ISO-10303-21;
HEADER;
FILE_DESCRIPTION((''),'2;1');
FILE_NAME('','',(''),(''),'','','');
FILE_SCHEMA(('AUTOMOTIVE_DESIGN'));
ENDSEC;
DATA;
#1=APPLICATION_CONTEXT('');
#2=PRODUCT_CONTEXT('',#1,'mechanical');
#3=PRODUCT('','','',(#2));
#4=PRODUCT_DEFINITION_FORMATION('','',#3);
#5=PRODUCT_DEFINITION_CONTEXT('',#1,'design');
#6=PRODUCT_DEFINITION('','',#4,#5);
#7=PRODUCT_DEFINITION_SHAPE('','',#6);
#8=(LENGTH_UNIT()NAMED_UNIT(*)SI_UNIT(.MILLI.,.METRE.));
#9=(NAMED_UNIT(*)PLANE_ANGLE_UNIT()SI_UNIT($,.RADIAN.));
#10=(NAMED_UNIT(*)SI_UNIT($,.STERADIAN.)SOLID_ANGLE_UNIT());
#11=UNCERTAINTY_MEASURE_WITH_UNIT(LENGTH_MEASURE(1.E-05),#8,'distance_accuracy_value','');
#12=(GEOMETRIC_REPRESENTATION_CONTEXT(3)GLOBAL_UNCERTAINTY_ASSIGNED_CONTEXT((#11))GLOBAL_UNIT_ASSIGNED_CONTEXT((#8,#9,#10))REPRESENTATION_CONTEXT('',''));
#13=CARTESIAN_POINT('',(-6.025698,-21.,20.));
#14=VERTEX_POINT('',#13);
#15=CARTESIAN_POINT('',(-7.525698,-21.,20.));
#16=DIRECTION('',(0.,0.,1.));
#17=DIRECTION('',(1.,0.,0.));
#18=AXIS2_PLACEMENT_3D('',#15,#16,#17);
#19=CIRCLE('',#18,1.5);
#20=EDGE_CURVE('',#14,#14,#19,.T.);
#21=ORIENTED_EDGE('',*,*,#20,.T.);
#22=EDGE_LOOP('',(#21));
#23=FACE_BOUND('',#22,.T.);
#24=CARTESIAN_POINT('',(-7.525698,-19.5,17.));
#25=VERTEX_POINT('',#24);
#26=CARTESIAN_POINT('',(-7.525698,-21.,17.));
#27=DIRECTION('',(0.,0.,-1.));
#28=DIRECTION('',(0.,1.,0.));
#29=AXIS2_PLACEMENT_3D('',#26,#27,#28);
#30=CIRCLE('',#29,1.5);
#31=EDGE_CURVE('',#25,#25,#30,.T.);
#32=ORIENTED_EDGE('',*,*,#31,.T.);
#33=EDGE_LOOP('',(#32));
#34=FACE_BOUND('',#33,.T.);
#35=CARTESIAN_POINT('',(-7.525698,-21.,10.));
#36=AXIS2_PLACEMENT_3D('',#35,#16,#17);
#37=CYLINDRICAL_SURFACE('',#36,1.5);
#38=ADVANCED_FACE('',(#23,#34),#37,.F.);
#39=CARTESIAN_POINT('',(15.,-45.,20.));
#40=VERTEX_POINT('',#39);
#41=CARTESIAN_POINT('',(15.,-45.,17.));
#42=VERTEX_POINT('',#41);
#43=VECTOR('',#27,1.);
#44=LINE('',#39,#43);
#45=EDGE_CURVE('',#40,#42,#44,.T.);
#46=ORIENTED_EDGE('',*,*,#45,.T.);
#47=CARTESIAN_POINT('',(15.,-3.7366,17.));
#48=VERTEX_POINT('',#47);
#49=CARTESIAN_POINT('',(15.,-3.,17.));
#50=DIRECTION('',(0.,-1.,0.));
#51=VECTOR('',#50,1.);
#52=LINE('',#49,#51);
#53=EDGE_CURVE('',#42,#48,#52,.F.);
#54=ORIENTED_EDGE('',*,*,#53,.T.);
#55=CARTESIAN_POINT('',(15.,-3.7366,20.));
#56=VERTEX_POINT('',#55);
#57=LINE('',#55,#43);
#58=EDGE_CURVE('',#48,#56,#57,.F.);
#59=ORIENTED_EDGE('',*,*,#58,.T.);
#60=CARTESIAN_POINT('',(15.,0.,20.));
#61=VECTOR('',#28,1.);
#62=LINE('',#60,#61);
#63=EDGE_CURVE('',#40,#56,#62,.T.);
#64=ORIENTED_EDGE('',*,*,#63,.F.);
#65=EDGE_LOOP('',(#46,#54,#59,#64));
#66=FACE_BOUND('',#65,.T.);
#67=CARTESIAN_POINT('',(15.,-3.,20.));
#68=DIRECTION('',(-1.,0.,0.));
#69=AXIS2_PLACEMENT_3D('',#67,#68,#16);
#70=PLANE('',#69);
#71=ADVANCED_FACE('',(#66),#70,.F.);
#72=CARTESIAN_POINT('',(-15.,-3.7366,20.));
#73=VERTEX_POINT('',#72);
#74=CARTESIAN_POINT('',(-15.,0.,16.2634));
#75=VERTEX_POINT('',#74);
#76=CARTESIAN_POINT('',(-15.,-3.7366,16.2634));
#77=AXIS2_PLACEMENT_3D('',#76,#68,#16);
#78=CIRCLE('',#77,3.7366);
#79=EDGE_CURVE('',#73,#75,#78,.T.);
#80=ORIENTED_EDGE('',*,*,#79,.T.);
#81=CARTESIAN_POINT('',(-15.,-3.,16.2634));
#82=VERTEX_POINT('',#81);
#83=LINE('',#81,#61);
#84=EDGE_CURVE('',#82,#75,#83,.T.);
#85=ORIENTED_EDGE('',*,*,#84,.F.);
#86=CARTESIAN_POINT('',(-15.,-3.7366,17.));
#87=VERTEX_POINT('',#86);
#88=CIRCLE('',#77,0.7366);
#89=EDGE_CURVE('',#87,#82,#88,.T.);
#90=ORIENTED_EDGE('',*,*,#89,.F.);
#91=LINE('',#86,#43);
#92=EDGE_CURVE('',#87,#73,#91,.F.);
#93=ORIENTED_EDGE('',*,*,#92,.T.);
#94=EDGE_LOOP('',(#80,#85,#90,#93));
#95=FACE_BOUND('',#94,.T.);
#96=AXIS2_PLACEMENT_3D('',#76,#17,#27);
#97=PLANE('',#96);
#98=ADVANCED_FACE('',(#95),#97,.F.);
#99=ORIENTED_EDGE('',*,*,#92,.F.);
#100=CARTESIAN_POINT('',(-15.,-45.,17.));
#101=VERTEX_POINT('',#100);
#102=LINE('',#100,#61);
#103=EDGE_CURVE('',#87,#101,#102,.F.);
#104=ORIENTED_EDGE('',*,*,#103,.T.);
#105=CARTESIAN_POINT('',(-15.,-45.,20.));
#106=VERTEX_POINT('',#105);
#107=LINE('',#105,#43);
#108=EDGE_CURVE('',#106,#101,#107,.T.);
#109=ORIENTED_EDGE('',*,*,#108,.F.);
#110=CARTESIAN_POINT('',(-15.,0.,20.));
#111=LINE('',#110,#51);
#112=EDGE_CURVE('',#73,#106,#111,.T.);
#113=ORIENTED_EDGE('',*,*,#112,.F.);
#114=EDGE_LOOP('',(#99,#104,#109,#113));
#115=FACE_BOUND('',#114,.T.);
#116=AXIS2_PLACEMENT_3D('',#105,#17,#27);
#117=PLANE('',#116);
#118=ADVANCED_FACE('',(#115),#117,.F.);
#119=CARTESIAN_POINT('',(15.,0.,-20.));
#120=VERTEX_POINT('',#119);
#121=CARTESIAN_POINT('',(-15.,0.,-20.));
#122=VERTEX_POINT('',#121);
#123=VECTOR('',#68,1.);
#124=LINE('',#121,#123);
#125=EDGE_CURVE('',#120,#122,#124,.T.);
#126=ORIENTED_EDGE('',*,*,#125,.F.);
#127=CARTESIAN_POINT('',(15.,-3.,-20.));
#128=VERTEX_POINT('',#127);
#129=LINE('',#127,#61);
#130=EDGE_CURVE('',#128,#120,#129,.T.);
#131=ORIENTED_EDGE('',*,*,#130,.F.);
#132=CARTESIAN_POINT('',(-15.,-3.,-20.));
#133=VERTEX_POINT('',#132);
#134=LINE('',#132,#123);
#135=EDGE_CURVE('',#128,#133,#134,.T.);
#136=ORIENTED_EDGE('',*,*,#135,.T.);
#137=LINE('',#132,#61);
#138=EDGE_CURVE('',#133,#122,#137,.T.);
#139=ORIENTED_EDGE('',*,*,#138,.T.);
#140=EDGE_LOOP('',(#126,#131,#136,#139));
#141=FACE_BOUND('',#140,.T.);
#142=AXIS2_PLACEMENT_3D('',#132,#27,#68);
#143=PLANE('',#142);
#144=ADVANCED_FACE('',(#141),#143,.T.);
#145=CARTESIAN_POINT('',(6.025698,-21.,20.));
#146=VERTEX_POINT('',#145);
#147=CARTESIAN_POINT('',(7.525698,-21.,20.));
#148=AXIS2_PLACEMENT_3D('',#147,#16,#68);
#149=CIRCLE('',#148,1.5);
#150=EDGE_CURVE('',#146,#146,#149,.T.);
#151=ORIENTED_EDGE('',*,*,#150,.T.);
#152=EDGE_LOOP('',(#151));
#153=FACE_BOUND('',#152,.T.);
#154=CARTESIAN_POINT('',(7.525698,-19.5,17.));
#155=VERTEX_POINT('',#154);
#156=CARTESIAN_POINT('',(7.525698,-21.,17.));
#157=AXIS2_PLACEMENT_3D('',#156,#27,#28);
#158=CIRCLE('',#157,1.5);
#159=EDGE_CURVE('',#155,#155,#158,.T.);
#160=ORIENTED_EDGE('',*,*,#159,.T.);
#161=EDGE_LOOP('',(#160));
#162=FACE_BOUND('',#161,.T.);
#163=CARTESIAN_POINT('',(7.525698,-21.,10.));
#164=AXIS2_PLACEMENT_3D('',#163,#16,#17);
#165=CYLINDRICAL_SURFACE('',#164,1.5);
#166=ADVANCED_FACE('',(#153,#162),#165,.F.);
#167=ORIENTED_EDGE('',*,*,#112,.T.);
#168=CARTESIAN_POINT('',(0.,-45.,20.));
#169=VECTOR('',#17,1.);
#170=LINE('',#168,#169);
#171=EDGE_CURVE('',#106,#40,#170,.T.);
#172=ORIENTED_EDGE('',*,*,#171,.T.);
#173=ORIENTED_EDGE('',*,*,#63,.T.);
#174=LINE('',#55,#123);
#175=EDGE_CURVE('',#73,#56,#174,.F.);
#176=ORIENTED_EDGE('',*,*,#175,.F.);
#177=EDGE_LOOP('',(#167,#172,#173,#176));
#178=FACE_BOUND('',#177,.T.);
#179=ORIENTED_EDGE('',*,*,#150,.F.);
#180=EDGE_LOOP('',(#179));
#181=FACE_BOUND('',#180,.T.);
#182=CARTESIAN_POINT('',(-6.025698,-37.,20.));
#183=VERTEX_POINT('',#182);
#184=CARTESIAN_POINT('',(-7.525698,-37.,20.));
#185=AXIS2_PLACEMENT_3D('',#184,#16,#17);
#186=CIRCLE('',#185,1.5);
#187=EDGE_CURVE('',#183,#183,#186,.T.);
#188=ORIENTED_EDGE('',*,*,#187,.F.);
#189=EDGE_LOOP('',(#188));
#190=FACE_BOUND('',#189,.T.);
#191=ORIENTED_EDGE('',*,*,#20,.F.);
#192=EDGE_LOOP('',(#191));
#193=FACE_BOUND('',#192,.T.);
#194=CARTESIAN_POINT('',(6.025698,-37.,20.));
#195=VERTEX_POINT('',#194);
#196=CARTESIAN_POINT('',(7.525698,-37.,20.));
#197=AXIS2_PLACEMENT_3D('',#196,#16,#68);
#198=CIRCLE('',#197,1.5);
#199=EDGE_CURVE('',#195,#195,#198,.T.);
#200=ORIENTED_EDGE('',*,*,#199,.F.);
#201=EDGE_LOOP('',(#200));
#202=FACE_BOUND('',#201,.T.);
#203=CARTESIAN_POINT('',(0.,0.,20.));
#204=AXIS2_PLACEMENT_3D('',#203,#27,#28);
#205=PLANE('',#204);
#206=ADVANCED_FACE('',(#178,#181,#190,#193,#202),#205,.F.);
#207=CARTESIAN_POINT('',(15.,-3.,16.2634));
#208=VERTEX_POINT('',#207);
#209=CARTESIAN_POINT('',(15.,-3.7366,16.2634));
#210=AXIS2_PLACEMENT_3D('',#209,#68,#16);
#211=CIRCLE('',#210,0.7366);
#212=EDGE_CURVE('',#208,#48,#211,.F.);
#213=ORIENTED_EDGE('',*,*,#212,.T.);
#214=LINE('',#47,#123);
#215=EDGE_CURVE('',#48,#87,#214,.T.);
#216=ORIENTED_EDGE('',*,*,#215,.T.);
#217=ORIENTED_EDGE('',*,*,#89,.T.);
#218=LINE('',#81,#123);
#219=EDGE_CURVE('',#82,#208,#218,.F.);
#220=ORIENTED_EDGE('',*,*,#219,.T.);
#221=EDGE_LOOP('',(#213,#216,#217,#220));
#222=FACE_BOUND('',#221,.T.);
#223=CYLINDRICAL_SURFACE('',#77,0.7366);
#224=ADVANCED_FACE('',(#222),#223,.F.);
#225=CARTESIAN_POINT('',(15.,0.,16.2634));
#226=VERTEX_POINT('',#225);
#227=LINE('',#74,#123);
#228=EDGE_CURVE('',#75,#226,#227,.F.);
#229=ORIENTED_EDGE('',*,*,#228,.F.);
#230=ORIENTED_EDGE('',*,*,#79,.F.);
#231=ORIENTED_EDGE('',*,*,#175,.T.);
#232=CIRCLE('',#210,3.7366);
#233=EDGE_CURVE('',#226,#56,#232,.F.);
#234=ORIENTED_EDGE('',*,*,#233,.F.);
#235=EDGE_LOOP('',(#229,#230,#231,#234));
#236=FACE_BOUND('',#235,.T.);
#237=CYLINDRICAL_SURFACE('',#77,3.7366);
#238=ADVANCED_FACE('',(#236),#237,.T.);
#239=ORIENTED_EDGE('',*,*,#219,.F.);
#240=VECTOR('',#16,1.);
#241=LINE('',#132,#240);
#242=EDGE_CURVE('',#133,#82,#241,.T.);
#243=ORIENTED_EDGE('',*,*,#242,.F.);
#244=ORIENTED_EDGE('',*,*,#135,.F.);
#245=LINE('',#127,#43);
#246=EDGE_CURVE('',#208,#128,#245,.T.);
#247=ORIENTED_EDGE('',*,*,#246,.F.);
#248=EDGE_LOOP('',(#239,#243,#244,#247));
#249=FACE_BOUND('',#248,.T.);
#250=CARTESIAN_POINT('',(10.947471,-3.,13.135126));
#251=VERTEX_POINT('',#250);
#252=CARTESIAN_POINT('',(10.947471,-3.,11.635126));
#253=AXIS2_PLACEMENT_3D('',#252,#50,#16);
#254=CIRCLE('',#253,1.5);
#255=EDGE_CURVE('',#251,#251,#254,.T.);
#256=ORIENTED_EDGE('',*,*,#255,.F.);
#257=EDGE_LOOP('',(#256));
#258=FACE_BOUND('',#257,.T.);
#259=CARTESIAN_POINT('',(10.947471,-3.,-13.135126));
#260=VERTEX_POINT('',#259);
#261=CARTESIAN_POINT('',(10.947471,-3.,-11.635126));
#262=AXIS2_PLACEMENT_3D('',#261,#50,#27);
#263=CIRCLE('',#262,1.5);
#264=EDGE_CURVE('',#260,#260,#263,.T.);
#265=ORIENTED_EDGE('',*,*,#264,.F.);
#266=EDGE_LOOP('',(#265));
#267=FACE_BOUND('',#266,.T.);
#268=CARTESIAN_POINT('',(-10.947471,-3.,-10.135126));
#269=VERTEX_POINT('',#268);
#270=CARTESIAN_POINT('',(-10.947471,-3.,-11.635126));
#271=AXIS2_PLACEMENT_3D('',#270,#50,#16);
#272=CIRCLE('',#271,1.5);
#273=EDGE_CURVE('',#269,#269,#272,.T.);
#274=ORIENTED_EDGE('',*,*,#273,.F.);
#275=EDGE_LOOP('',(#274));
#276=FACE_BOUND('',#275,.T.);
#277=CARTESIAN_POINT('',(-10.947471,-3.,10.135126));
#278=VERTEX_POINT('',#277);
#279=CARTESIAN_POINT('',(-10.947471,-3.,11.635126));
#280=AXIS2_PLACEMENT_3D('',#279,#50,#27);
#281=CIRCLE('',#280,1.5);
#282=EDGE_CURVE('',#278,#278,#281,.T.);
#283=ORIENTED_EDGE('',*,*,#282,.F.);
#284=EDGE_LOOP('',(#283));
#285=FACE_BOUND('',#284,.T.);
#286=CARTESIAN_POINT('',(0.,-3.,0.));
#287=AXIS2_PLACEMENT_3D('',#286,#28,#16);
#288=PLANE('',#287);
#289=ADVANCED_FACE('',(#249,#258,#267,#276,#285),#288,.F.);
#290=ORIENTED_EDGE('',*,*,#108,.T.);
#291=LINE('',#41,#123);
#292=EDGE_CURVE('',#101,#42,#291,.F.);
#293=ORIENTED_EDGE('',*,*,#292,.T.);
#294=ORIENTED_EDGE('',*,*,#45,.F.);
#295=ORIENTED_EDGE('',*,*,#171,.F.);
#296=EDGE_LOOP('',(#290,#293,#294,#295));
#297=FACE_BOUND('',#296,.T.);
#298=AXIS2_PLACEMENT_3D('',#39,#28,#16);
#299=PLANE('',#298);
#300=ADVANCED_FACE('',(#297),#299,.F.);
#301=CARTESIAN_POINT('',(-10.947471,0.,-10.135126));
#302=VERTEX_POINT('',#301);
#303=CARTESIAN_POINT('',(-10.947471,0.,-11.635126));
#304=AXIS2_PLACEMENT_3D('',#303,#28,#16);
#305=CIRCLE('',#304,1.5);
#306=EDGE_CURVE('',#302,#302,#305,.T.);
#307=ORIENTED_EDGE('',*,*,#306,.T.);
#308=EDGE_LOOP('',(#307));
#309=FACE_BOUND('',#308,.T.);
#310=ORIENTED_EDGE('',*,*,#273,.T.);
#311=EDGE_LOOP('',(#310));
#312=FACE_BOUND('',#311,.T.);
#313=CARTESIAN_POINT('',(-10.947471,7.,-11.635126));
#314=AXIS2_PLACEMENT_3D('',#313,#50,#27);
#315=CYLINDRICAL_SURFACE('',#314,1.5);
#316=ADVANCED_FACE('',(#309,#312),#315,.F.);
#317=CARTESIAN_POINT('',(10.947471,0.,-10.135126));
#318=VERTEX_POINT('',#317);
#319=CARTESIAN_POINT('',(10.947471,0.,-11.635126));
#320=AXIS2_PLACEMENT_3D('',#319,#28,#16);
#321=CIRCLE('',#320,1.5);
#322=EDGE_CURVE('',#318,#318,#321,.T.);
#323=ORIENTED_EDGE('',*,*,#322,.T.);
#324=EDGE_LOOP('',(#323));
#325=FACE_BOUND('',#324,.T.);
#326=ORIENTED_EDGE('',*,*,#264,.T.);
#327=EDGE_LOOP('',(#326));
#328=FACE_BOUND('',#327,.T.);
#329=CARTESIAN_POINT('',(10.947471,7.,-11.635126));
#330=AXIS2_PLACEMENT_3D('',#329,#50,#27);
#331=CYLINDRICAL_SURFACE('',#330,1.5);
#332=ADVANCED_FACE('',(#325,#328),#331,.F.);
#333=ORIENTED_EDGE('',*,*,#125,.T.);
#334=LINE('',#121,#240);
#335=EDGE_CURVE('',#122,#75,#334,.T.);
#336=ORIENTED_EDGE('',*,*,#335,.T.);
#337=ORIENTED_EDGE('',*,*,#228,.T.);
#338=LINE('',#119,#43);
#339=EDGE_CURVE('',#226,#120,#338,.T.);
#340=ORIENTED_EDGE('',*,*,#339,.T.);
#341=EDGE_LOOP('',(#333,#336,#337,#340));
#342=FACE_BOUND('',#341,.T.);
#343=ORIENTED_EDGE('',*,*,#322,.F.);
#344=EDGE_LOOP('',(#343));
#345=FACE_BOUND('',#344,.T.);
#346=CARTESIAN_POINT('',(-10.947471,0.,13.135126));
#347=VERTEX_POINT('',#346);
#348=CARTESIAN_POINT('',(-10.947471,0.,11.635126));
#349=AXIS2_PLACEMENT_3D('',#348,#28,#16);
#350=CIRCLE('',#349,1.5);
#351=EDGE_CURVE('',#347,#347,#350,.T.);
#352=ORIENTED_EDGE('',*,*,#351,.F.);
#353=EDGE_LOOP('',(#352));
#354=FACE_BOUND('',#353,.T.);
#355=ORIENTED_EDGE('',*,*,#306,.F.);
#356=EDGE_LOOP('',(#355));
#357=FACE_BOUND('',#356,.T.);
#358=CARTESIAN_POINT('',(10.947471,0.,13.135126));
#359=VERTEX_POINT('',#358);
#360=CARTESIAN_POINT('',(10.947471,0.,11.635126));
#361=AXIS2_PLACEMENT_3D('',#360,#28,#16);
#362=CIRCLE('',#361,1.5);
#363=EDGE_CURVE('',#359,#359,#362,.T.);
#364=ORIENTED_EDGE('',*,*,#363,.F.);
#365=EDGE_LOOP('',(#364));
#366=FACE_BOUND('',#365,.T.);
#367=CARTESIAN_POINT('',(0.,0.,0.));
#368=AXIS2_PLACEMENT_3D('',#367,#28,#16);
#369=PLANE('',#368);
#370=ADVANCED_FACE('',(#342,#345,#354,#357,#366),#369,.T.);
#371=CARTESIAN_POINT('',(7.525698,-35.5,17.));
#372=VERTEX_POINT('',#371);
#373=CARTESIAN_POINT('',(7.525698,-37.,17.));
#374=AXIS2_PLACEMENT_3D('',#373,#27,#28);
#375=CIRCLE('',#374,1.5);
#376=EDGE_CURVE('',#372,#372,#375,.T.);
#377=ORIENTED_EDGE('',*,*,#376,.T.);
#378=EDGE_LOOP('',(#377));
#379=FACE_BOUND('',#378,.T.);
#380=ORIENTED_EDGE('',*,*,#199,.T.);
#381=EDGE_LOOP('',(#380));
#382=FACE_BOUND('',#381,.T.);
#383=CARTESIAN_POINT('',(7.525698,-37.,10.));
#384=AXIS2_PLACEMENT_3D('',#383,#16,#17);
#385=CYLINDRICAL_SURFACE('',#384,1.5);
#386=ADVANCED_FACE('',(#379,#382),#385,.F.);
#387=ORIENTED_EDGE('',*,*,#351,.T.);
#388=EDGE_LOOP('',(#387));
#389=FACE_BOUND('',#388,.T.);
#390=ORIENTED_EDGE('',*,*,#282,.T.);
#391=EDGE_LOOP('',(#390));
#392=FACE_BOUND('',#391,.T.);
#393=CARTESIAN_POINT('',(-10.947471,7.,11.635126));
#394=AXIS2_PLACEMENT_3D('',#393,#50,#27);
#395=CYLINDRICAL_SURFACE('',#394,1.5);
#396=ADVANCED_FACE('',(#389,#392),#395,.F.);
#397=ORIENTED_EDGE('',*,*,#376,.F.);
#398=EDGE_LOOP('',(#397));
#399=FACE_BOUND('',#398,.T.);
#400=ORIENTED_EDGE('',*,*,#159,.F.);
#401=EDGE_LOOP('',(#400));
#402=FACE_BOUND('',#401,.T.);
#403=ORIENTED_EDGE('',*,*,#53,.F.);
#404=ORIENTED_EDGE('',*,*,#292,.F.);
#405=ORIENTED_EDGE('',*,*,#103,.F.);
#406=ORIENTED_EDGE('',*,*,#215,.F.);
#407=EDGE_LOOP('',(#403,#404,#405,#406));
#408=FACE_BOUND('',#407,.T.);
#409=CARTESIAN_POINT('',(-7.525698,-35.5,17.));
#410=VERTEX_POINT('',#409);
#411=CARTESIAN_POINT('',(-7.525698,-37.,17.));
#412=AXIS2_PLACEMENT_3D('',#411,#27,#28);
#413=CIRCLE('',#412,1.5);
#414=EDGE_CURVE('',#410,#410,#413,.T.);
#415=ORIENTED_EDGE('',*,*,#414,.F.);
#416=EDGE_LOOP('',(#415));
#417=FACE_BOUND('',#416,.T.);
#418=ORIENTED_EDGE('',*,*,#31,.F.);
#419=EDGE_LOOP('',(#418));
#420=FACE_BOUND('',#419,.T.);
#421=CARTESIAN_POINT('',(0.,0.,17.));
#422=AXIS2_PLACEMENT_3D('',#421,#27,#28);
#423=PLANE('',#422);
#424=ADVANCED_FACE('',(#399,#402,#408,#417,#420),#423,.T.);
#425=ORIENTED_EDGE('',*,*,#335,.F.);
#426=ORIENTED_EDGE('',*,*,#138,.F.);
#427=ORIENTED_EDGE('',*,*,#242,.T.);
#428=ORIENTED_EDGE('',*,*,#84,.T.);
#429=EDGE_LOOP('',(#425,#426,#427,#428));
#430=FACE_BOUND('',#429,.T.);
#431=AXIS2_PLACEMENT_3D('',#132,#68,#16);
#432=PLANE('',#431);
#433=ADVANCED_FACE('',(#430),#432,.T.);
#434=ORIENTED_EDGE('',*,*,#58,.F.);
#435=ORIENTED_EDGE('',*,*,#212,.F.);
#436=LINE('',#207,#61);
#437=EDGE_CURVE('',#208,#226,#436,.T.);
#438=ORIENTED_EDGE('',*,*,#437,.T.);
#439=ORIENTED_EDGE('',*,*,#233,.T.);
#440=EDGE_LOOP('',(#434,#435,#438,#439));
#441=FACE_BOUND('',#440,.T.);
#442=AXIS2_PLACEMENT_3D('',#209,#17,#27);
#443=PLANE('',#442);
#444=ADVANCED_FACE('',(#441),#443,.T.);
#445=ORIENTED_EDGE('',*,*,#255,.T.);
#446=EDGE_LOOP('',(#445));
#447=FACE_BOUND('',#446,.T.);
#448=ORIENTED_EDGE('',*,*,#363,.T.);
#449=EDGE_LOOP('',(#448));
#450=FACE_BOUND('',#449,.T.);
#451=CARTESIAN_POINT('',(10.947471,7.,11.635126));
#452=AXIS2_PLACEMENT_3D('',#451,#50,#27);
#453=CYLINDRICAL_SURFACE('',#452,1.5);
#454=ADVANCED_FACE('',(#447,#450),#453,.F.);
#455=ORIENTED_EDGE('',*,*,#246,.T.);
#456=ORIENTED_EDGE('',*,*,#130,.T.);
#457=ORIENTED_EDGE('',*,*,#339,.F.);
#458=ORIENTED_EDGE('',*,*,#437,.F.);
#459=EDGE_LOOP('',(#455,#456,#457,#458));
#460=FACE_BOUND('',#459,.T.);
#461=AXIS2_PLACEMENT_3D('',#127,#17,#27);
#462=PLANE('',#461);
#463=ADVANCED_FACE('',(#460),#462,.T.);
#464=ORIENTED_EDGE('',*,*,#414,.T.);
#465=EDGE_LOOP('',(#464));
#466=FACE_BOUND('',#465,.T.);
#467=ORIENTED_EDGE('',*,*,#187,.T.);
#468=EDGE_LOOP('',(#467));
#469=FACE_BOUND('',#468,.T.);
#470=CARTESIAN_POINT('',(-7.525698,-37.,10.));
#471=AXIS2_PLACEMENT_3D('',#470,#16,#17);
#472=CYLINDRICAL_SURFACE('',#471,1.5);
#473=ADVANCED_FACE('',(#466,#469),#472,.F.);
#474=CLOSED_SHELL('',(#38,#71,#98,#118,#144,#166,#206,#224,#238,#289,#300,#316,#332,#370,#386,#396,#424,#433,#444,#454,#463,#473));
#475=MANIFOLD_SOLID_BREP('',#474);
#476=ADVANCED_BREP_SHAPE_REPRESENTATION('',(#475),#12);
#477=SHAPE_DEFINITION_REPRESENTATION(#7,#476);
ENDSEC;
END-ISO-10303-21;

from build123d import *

# Parameters (mm, degrees)
SKETCH1_W                    = 30
SKETCH1_H                    = 40
BASE_FLANGE1_DEPTH           = 3
EDGE_FLANGE1_STRIP_W         = 13.4732
EDGE_FLANGE1_STRIP_H         = 3
EDGE_FLANGE1_STRIP_CUT_DEPTH = 30
EDGE_FLANGE1_DEPTH           = 30
SKETCH9_R                    = 1.5
CUT_EXTRUDE1_DEPTH           = 10
SKETCH10_R                   = 1.5
CUT_EXTRUDE2_DEPTH           = 10


# Sheet-metal steps are written as plain solids
with BuildPart() as part:
    # Sketch1 → Base-Flange1 (new body)
    with BuildSketch(Plane(origin=(0, 0, 0), x_dir=(1, 0, 0), z_dir=(0, 1, 0))):
        Rectangle(SKETCH1_W, SKETCH1_H)
    extrude(amount=-BASE_FLANGE1_DEPTH)

    # Edge-Flange1 strip (across the edge) → Edge-Flange1 strip cut (cut)
    with BuildSketch(Plane(origin=(15, -3, 20), x_dir=(0, 0, -1), z_dir=(-1, 0, 0))):
        with Locations((-3, -1.5)):
            Rectangle(EDGE_FLANGE1_STRIP_W, EDGE_FLANGE1_STRIP_H)
    extrude(amount=EDGE_FLANGE1_STRIP_CUT_DEPTH, mode=Mode.SUBTRACT)

    # Edge-Flange1 section (across the edge) → Edge-Flange1 (add)
    with BuildSketch(Plane(origin=(15, -3, 20), x_dir=(0, 0, -1), z_dir=(-1, 0, 0))):
        with BuildLine():
            Line((0, 0.7366), (0, 42))
            Line((0, 42), (3, 42))
            Line((3, 42), (3, 0.7366))
            ThreePointArc((3, 0.7366), (3.215745145, 0.215745145), (3.7366, 0))
            Line((3.7366, 0), (3.7366, -3))
            ThreePointArc((3.7366, -3), (1.094424801, -1.905575199), (0, 0.7366))
        make_face()
    extrude(amount=EDGE_FLANGE1_DEPTH)

    # Sketch9 → Cut-Extrude1 (cut)
    with BuildSketch(Plane.XY.offset(20)):
        with Locations((-7.525698427, -21)):
            Circle(SKETCH9_R)
        with Locations((-7.525698427, -37)):
            Circle(SKETCH9_R)
        with Locations(Location((7.525698427, -37, 0), (0, 0, 90))):
            Circle(SKETCH9_R)
        with Locations(Location((7.525698427, -21, 0), (0, 0, 90))):
            Circle(SKETCH9_R)
    extrude(amount=-CUT_EXTRUDE1_DEPTH, mode=Mode.SUBTRACT)

    # Sketch10 → Cut-Extrude2 (cut)
    with BuildSketch(Plane.XZ.offset(3)):
        with Locations(Location((-10.947470665, 11.635125857, 0), (0, 0, 270))):
            Circle(SKETCH10_R)
        with Locations(Location((10.947470665, 11.635125857, 0), (0, 0, 90))):
            Circle(SKETCH10_R)
        with Locations(Location((10.947470665, -11.635125857, 0), (0, 0, 270))):
            Circle(SKETCH10_R)
        with Locations(Location((-10.947470665, -11.635125857, 0), (0, 0, 90))):
            Circle(SKETCH10_R)
    extrude(amount=-CUT_EXTRUDE2_DEPTH, mode=Mode.SUBTRACT)


solid = part.part
